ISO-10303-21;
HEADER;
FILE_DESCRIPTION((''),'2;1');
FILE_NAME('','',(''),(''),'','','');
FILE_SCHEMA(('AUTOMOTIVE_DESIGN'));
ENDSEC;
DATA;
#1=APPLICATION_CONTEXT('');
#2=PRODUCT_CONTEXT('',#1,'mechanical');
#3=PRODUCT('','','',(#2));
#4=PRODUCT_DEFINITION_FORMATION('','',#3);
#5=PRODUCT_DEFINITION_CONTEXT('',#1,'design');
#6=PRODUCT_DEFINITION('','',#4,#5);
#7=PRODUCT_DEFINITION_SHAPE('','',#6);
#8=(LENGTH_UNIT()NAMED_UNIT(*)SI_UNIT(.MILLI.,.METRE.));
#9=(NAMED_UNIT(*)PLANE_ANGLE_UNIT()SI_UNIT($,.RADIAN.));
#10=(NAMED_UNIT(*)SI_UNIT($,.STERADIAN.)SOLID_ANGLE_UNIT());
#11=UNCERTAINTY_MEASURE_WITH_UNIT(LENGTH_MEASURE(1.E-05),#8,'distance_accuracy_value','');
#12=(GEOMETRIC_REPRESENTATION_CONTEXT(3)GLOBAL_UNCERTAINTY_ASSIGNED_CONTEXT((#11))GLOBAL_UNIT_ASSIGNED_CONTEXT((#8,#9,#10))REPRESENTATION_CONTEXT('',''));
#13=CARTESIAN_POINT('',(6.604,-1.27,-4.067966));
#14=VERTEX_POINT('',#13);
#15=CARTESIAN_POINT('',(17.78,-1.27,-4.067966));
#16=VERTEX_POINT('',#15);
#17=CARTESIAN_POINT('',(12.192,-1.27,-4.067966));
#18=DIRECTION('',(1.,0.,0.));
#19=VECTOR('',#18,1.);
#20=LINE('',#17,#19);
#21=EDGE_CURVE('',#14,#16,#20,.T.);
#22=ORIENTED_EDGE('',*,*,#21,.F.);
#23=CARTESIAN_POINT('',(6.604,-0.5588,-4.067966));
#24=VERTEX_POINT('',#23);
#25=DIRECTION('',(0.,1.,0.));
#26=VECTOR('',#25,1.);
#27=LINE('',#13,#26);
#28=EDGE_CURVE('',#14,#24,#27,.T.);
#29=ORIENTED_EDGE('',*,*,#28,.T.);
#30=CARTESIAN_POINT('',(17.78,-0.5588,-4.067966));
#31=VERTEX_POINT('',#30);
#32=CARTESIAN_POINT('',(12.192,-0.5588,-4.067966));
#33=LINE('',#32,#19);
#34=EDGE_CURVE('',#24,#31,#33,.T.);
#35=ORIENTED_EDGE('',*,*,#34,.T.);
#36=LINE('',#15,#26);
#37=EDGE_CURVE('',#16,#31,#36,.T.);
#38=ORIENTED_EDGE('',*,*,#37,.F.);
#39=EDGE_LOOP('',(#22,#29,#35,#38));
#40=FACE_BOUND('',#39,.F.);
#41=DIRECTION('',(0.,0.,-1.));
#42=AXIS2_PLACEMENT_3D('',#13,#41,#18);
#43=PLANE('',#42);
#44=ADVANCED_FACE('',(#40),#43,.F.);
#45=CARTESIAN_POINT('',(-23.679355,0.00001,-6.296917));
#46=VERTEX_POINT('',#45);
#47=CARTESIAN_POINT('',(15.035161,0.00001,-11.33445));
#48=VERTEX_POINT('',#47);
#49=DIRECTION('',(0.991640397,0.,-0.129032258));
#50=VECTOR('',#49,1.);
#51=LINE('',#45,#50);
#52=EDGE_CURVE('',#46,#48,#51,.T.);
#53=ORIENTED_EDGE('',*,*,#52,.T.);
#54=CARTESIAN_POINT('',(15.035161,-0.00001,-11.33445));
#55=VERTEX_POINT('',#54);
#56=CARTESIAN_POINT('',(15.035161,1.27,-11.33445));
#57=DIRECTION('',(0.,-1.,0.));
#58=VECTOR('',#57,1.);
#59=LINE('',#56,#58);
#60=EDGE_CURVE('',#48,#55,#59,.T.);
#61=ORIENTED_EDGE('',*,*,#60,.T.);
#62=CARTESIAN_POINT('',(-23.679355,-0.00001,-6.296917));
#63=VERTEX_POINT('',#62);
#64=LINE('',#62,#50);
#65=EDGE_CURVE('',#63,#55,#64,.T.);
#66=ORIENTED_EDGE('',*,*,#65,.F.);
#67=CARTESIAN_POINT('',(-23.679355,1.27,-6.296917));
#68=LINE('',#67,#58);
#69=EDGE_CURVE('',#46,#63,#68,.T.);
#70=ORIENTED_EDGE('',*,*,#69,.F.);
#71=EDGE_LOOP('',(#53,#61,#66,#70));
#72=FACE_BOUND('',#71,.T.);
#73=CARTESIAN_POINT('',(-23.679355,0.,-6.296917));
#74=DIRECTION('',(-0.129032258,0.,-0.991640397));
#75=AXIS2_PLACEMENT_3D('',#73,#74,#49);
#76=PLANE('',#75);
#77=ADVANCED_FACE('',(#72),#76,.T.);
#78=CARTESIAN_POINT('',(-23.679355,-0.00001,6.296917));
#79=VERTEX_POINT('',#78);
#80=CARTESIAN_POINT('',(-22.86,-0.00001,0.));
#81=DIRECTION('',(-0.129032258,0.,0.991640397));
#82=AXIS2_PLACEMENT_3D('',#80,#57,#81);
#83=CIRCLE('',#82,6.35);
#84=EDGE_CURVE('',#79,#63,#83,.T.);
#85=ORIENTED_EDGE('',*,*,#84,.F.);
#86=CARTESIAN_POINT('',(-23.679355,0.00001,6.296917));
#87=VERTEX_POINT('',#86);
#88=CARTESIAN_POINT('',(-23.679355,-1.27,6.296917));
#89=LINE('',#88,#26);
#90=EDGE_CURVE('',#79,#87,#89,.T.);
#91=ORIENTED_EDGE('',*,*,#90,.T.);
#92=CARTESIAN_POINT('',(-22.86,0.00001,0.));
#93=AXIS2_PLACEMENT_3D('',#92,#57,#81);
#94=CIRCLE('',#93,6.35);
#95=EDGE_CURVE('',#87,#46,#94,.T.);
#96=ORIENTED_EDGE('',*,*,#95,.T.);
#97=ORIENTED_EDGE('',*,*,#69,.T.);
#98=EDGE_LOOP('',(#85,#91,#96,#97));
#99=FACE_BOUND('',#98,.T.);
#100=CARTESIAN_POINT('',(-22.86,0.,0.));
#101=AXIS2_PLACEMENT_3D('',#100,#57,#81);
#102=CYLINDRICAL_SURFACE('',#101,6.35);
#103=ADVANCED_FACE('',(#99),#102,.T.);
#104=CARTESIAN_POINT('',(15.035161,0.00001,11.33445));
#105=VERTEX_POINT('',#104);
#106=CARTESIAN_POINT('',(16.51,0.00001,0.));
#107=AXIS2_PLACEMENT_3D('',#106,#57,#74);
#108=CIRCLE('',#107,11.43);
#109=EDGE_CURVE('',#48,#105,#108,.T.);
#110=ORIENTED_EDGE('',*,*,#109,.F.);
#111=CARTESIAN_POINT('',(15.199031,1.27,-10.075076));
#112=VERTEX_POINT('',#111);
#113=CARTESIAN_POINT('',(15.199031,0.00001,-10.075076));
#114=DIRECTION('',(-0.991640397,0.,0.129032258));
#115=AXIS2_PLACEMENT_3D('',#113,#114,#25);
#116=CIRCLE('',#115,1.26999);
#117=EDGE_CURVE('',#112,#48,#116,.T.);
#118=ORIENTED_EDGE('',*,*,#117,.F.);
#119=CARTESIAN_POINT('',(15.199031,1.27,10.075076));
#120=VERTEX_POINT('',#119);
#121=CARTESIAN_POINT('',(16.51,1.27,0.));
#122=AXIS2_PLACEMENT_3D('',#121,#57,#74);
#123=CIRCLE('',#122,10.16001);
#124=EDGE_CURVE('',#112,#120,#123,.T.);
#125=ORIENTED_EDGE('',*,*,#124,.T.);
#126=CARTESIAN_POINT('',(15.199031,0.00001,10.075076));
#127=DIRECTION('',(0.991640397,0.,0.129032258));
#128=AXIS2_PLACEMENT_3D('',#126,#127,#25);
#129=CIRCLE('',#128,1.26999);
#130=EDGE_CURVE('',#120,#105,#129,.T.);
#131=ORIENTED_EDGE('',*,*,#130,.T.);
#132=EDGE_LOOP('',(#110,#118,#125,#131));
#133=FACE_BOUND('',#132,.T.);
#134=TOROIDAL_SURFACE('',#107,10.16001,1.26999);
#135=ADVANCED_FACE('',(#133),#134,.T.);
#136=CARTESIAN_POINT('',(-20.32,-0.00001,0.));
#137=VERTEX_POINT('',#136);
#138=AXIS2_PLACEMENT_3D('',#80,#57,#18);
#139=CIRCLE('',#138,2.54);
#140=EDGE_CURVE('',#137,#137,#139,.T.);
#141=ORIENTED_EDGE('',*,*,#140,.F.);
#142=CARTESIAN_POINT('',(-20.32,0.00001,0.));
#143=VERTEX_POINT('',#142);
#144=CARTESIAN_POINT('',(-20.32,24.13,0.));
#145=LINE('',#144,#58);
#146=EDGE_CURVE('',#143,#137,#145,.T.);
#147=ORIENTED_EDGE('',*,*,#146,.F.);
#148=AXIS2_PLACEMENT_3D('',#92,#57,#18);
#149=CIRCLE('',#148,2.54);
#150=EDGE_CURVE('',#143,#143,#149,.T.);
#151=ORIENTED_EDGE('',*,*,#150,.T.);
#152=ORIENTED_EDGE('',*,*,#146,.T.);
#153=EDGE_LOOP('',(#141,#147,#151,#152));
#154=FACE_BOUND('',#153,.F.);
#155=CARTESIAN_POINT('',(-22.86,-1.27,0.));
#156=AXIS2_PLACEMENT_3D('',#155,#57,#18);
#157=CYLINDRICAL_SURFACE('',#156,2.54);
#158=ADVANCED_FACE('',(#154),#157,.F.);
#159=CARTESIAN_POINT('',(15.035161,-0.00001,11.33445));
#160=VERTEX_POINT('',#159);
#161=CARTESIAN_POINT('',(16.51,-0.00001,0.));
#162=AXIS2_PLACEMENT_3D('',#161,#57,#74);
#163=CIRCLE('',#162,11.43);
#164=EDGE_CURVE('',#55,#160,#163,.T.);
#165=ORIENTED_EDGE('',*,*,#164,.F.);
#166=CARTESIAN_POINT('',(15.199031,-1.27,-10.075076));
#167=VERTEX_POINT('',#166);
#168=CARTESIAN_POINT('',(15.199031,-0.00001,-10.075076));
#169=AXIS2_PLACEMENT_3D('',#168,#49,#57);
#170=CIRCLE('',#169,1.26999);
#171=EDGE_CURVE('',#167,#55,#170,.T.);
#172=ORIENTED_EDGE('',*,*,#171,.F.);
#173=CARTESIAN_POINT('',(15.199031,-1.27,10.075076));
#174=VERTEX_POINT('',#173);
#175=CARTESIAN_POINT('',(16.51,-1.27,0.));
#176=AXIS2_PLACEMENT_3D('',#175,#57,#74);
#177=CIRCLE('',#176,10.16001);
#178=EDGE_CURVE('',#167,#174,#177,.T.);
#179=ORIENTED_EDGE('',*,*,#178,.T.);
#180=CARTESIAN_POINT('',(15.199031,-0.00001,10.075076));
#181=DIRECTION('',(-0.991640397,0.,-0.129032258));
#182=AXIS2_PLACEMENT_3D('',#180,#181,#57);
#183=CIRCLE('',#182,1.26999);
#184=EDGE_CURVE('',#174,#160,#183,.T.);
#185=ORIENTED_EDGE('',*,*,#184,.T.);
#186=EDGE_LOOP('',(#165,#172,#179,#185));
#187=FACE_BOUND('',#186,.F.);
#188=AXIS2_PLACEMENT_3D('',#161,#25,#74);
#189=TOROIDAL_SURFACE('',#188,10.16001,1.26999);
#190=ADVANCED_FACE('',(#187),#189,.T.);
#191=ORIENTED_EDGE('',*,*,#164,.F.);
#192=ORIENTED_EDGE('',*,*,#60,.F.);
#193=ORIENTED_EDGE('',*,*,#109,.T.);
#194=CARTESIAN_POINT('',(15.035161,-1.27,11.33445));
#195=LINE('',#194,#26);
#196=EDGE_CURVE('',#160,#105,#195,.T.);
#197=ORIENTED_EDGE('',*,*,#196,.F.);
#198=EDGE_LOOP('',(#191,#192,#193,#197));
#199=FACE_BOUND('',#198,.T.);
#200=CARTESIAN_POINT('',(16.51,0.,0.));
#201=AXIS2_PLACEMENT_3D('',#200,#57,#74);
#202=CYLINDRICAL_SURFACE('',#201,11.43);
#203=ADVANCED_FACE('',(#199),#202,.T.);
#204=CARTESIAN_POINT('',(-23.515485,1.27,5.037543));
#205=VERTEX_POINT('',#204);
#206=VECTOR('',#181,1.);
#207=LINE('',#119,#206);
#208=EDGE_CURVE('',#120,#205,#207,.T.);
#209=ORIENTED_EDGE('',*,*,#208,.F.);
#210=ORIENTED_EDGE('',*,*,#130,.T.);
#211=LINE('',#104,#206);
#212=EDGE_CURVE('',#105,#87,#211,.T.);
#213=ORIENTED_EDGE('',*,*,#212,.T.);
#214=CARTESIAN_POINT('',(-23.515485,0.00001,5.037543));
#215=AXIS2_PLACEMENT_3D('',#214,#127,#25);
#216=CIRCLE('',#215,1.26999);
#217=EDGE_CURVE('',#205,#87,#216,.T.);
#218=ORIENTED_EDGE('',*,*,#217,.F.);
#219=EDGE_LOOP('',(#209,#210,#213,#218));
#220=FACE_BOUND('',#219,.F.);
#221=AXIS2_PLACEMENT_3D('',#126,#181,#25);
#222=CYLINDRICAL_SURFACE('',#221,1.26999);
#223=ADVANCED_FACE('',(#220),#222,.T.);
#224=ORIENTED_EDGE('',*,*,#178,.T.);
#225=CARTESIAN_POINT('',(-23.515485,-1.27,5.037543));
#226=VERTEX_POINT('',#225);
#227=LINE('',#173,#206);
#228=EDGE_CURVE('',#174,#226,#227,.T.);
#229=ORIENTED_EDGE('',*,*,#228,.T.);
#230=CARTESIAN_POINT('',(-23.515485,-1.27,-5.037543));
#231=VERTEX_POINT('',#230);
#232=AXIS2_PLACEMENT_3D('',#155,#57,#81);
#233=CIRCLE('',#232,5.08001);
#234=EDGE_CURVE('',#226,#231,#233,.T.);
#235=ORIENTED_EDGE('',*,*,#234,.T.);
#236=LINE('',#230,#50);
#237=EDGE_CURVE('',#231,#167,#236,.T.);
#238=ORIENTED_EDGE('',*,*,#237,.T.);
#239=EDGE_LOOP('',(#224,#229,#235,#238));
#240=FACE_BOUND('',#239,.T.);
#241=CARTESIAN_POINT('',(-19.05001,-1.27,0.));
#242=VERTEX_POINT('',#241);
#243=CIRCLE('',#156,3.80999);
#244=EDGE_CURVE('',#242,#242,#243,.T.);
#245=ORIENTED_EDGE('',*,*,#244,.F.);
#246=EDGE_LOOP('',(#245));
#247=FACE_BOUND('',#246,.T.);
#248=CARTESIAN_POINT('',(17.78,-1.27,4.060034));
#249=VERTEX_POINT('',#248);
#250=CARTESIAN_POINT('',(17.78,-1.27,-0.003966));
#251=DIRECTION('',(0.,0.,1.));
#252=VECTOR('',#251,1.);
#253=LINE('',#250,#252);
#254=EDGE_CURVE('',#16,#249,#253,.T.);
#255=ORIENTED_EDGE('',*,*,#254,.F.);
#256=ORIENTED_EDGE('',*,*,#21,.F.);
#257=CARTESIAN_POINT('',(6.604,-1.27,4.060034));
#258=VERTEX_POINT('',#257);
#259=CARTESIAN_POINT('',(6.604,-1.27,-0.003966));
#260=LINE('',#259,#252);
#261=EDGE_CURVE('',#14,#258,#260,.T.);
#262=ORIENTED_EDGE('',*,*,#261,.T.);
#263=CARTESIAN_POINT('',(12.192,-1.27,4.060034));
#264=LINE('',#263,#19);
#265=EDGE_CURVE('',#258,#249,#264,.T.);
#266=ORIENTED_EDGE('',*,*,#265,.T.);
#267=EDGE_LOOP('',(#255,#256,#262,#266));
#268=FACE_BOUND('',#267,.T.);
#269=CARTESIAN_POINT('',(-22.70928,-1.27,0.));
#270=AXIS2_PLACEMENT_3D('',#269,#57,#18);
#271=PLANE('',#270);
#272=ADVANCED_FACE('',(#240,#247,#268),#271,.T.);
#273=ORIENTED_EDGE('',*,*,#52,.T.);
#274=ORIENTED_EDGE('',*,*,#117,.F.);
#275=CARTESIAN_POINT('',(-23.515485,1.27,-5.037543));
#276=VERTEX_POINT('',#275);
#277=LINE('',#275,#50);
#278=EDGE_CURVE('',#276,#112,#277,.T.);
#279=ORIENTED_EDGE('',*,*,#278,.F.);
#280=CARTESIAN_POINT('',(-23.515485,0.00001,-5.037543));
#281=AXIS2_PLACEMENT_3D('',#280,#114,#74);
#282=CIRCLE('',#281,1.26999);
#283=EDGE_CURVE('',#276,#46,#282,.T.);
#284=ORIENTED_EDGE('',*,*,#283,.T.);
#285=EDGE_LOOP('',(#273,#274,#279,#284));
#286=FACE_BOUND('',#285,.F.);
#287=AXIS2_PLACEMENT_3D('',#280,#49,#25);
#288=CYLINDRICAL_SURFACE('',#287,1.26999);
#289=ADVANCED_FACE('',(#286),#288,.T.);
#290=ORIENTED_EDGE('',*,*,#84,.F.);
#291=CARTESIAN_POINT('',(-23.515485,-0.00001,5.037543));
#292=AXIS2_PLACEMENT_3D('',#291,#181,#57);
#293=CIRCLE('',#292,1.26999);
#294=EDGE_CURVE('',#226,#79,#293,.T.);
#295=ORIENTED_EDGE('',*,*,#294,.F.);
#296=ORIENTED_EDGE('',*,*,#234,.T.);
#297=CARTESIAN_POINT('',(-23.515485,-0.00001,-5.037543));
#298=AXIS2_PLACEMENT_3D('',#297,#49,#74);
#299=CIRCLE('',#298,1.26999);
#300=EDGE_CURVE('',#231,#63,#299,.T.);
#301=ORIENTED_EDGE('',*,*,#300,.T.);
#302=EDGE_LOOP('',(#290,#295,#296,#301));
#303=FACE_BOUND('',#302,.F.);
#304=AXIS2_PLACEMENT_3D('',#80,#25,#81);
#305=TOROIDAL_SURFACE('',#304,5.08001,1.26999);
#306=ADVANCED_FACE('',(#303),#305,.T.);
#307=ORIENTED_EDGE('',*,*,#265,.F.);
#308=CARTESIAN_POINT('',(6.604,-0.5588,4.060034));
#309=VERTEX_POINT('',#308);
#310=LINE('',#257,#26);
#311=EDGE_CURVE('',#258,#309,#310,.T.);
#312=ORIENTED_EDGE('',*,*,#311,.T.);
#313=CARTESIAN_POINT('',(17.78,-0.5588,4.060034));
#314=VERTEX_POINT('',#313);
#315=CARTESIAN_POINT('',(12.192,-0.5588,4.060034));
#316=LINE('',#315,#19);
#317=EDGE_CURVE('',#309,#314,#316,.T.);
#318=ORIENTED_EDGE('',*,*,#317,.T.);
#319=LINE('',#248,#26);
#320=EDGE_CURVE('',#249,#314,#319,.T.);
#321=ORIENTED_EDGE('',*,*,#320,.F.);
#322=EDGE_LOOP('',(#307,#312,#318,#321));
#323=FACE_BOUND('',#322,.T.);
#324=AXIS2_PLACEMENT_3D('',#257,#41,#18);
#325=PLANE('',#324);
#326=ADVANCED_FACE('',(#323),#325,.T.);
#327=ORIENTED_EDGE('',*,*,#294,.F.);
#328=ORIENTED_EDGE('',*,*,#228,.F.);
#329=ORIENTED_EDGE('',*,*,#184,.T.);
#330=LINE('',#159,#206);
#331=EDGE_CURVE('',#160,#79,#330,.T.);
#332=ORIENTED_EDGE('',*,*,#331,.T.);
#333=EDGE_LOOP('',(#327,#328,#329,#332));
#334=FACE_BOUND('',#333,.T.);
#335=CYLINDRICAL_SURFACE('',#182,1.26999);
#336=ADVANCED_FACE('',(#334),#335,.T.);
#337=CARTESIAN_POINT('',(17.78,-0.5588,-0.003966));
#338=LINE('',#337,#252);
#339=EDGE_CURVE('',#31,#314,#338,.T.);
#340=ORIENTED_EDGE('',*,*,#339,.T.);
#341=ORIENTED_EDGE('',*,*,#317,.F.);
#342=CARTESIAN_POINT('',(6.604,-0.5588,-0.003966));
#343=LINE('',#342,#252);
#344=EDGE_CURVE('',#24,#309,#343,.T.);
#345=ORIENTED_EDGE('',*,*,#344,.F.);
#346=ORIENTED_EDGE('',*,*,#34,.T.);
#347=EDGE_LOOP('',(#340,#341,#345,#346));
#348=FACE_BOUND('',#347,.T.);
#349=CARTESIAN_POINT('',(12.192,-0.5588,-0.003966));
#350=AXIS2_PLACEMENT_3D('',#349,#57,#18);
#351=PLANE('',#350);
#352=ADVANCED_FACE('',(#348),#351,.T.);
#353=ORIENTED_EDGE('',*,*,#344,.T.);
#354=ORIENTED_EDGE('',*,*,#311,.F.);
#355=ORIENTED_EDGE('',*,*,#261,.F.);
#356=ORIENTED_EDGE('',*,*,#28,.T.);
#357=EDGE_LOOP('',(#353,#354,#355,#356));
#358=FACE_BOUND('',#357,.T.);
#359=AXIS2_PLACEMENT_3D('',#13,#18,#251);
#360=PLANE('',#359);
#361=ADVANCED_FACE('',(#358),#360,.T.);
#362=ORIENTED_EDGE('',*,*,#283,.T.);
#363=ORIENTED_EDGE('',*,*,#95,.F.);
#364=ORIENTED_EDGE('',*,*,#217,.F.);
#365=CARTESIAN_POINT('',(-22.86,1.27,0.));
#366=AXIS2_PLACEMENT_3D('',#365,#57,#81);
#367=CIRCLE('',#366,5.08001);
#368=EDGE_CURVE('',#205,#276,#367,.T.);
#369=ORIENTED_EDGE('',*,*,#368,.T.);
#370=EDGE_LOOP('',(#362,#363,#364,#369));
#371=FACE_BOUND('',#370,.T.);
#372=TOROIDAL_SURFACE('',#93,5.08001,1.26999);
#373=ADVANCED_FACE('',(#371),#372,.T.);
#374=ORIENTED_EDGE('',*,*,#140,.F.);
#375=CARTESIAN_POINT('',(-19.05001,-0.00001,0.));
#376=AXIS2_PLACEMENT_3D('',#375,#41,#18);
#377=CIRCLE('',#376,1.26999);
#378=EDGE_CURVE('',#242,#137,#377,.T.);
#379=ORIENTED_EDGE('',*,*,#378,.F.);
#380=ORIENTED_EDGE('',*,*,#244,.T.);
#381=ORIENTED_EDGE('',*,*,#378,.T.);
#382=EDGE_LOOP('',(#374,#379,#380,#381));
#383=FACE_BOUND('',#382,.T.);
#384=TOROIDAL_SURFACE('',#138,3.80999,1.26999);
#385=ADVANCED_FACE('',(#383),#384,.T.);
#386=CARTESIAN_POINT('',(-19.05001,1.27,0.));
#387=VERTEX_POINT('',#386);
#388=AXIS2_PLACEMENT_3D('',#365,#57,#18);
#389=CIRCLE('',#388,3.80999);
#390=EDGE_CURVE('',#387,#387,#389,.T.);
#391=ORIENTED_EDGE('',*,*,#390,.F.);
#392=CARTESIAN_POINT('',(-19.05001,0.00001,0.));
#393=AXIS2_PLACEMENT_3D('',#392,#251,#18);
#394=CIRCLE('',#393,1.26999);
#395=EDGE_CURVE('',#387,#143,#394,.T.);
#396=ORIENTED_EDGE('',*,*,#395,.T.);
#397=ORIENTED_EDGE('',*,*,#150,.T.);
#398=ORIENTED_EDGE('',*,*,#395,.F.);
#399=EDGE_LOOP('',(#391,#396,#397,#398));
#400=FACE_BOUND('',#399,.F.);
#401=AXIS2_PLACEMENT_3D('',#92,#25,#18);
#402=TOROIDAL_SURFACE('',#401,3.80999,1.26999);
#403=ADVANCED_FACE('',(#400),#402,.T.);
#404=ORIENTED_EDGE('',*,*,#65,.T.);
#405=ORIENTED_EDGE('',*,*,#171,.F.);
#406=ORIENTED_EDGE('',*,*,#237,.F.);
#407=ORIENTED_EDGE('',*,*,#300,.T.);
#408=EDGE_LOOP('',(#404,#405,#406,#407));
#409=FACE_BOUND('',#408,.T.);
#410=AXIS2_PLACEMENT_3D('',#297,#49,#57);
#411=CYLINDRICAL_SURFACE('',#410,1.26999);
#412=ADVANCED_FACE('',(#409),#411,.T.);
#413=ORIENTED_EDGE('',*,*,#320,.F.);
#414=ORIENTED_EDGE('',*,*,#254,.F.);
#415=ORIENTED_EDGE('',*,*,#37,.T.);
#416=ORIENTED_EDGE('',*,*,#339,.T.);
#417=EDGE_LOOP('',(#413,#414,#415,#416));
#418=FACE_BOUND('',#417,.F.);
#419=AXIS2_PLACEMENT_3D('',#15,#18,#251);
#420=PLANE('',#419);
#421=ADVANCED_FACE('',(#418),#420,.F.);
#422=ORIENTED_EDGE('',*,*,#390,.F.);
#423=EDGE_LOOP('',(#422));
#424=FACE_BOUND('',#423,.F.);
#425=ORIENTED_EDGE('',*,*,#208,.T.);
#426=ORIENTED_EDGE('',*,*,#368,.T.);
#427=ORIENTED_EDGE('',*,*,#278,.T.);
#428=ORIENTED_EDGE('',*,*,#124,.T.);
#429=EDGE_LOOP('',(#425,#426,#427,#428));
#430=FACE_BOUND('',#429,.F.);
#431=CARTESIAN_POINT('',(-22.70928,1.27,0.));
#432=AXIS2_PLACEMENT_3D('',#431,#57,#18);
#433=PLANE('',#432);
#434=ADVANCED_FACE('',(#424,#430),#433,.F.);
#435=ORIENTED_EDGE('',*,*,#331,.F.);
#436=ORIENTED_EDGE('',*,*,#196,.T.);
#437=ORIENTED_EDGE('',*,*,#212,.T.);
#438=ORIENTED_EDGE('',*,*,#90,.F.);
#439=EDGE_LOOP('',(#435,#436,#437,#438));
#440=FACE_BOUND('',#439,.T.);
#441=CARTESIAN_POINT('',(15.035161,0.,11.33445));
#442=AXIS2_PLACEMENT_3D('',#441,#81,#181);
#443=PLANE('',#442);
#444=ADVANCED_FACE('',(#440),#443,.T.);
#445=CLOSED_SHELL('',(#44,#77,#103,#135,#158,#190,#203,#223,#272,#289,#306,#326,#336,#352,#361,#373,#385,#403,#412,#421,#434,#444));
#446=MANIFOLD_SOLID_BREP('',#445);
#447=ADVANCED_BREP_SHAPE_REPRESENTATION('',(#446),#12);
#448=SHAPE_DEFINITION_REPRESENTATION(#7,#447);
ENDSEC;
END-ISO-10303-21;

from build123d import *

# Parameters (mm, degrees)
F1_DEPTH = 1.27
F2_R     = 2.54
F3_DEPTH = 25.4
F4_R     = 1.26999
F5_W     = 11.176
F5_H     = 8.128
F6_DEPTH = 0.7112


# Not quite as in the source:
# - a fillet or chamfer is up to 0.001 mm smaller than in the source, because OpenCascade refuses the exact size


with BuildPart() as f1:
    # F0 (on Front) → F1 (new body, symmetric)
    with BuildSketch(Plane.XZ):
        with BuildLine():
            ThreePointArc((-23.6793548387, -6.2969165191), (-18.6695586883, -4.7710273121), (-16.51, 0))
            ThreePointArc((-16.51, 0), (-18.6695586883, 4.7710273121), (-23.6793548387, 6.2969165191))
            ThreePointArc((-23.6793548387, 6.2969165191), (-29.21, 0), (-23.6793548387, -6.2969165191))
        make_face()
        with BuildLine():
            ThreePointArc((-23.6793548387, 6.2969165191), (-18.6695586883, 4.7710273121), (-16.51, 0))
            ThreePointArc((-16.51, 0), (-18.6695586883, -4.7710273121), (-23.6793548387, -6.2969165191))
            Line((-23.6793548387, -6.2969165191), (15.0351612903, -11.3344497343))
            ThreePointArc((15.0351612903, -11.3344497343), (5.08, 0), (15.0351612903, 11.3344497343))
            Line((15.0351612903, 11.3344497343), (-23.6793548387, 6.2969165191))
        make_face()
        with BuildLine():
            ThreePointArc((27.94, 0), (24.0527943611, 8.5878491618), (15.0351612903, 11.3344497343))
            ThreePointArc((15.0351612903, 11.3344497343), (5.08, 0), (15.0351612903, -11.3344497343))
            ThreePointArc((15.0351612903, -11.3344497343), (24.0527943611, -8.5878491618), (27.94, 0))
        make_face()
    extrude(amount=F1_DEPTH, both=True)

    # F2 (on face) → F3 (cut, symmetric)
    with BuildSketch(Plane.XZ.offset(1.27)):
        with Locations((-22.86, 0)):
            Circle(F2_R)
    extrude(amount=F3_DEPTH, both=True, mode=Mode.SUBTRACT)

    # F4 (radius 1.27 in the source; OpenCascade refuses exactly that, so slightly less here)
    f4_edges = [f1.edges().sort_by_distance(p)[0] for p in [
        (-4.322097, -1.27, 8.815683),
        (-4.322097, 1.27, 8.815683),
        (27.94, -1.27, 0),
        (15.035161, 0, -11.33445),
        (27.94, 1.27, 0),
        (15.035161, 0, 11.33445),
        (-29.21, -1.27, 0),
        (-25.4, 1.27, 0),
        (-25.4, -1.27, 0),
        (-29.21, 1.27, 0),
    ]]
    fillet(f4_edges, radius=F4_R)

    # F5 (on face) → F6 (cut)
    with BuildSketch(Plane.XZ.offset(1.27)):
        with Locations((12.192, -0.0039664305)):
            Rectangle(F5_W, F5_H)
    extrude(amount=-F6_DEPTH, mode=Mode.SUBTRACT)


solid = f1.part
